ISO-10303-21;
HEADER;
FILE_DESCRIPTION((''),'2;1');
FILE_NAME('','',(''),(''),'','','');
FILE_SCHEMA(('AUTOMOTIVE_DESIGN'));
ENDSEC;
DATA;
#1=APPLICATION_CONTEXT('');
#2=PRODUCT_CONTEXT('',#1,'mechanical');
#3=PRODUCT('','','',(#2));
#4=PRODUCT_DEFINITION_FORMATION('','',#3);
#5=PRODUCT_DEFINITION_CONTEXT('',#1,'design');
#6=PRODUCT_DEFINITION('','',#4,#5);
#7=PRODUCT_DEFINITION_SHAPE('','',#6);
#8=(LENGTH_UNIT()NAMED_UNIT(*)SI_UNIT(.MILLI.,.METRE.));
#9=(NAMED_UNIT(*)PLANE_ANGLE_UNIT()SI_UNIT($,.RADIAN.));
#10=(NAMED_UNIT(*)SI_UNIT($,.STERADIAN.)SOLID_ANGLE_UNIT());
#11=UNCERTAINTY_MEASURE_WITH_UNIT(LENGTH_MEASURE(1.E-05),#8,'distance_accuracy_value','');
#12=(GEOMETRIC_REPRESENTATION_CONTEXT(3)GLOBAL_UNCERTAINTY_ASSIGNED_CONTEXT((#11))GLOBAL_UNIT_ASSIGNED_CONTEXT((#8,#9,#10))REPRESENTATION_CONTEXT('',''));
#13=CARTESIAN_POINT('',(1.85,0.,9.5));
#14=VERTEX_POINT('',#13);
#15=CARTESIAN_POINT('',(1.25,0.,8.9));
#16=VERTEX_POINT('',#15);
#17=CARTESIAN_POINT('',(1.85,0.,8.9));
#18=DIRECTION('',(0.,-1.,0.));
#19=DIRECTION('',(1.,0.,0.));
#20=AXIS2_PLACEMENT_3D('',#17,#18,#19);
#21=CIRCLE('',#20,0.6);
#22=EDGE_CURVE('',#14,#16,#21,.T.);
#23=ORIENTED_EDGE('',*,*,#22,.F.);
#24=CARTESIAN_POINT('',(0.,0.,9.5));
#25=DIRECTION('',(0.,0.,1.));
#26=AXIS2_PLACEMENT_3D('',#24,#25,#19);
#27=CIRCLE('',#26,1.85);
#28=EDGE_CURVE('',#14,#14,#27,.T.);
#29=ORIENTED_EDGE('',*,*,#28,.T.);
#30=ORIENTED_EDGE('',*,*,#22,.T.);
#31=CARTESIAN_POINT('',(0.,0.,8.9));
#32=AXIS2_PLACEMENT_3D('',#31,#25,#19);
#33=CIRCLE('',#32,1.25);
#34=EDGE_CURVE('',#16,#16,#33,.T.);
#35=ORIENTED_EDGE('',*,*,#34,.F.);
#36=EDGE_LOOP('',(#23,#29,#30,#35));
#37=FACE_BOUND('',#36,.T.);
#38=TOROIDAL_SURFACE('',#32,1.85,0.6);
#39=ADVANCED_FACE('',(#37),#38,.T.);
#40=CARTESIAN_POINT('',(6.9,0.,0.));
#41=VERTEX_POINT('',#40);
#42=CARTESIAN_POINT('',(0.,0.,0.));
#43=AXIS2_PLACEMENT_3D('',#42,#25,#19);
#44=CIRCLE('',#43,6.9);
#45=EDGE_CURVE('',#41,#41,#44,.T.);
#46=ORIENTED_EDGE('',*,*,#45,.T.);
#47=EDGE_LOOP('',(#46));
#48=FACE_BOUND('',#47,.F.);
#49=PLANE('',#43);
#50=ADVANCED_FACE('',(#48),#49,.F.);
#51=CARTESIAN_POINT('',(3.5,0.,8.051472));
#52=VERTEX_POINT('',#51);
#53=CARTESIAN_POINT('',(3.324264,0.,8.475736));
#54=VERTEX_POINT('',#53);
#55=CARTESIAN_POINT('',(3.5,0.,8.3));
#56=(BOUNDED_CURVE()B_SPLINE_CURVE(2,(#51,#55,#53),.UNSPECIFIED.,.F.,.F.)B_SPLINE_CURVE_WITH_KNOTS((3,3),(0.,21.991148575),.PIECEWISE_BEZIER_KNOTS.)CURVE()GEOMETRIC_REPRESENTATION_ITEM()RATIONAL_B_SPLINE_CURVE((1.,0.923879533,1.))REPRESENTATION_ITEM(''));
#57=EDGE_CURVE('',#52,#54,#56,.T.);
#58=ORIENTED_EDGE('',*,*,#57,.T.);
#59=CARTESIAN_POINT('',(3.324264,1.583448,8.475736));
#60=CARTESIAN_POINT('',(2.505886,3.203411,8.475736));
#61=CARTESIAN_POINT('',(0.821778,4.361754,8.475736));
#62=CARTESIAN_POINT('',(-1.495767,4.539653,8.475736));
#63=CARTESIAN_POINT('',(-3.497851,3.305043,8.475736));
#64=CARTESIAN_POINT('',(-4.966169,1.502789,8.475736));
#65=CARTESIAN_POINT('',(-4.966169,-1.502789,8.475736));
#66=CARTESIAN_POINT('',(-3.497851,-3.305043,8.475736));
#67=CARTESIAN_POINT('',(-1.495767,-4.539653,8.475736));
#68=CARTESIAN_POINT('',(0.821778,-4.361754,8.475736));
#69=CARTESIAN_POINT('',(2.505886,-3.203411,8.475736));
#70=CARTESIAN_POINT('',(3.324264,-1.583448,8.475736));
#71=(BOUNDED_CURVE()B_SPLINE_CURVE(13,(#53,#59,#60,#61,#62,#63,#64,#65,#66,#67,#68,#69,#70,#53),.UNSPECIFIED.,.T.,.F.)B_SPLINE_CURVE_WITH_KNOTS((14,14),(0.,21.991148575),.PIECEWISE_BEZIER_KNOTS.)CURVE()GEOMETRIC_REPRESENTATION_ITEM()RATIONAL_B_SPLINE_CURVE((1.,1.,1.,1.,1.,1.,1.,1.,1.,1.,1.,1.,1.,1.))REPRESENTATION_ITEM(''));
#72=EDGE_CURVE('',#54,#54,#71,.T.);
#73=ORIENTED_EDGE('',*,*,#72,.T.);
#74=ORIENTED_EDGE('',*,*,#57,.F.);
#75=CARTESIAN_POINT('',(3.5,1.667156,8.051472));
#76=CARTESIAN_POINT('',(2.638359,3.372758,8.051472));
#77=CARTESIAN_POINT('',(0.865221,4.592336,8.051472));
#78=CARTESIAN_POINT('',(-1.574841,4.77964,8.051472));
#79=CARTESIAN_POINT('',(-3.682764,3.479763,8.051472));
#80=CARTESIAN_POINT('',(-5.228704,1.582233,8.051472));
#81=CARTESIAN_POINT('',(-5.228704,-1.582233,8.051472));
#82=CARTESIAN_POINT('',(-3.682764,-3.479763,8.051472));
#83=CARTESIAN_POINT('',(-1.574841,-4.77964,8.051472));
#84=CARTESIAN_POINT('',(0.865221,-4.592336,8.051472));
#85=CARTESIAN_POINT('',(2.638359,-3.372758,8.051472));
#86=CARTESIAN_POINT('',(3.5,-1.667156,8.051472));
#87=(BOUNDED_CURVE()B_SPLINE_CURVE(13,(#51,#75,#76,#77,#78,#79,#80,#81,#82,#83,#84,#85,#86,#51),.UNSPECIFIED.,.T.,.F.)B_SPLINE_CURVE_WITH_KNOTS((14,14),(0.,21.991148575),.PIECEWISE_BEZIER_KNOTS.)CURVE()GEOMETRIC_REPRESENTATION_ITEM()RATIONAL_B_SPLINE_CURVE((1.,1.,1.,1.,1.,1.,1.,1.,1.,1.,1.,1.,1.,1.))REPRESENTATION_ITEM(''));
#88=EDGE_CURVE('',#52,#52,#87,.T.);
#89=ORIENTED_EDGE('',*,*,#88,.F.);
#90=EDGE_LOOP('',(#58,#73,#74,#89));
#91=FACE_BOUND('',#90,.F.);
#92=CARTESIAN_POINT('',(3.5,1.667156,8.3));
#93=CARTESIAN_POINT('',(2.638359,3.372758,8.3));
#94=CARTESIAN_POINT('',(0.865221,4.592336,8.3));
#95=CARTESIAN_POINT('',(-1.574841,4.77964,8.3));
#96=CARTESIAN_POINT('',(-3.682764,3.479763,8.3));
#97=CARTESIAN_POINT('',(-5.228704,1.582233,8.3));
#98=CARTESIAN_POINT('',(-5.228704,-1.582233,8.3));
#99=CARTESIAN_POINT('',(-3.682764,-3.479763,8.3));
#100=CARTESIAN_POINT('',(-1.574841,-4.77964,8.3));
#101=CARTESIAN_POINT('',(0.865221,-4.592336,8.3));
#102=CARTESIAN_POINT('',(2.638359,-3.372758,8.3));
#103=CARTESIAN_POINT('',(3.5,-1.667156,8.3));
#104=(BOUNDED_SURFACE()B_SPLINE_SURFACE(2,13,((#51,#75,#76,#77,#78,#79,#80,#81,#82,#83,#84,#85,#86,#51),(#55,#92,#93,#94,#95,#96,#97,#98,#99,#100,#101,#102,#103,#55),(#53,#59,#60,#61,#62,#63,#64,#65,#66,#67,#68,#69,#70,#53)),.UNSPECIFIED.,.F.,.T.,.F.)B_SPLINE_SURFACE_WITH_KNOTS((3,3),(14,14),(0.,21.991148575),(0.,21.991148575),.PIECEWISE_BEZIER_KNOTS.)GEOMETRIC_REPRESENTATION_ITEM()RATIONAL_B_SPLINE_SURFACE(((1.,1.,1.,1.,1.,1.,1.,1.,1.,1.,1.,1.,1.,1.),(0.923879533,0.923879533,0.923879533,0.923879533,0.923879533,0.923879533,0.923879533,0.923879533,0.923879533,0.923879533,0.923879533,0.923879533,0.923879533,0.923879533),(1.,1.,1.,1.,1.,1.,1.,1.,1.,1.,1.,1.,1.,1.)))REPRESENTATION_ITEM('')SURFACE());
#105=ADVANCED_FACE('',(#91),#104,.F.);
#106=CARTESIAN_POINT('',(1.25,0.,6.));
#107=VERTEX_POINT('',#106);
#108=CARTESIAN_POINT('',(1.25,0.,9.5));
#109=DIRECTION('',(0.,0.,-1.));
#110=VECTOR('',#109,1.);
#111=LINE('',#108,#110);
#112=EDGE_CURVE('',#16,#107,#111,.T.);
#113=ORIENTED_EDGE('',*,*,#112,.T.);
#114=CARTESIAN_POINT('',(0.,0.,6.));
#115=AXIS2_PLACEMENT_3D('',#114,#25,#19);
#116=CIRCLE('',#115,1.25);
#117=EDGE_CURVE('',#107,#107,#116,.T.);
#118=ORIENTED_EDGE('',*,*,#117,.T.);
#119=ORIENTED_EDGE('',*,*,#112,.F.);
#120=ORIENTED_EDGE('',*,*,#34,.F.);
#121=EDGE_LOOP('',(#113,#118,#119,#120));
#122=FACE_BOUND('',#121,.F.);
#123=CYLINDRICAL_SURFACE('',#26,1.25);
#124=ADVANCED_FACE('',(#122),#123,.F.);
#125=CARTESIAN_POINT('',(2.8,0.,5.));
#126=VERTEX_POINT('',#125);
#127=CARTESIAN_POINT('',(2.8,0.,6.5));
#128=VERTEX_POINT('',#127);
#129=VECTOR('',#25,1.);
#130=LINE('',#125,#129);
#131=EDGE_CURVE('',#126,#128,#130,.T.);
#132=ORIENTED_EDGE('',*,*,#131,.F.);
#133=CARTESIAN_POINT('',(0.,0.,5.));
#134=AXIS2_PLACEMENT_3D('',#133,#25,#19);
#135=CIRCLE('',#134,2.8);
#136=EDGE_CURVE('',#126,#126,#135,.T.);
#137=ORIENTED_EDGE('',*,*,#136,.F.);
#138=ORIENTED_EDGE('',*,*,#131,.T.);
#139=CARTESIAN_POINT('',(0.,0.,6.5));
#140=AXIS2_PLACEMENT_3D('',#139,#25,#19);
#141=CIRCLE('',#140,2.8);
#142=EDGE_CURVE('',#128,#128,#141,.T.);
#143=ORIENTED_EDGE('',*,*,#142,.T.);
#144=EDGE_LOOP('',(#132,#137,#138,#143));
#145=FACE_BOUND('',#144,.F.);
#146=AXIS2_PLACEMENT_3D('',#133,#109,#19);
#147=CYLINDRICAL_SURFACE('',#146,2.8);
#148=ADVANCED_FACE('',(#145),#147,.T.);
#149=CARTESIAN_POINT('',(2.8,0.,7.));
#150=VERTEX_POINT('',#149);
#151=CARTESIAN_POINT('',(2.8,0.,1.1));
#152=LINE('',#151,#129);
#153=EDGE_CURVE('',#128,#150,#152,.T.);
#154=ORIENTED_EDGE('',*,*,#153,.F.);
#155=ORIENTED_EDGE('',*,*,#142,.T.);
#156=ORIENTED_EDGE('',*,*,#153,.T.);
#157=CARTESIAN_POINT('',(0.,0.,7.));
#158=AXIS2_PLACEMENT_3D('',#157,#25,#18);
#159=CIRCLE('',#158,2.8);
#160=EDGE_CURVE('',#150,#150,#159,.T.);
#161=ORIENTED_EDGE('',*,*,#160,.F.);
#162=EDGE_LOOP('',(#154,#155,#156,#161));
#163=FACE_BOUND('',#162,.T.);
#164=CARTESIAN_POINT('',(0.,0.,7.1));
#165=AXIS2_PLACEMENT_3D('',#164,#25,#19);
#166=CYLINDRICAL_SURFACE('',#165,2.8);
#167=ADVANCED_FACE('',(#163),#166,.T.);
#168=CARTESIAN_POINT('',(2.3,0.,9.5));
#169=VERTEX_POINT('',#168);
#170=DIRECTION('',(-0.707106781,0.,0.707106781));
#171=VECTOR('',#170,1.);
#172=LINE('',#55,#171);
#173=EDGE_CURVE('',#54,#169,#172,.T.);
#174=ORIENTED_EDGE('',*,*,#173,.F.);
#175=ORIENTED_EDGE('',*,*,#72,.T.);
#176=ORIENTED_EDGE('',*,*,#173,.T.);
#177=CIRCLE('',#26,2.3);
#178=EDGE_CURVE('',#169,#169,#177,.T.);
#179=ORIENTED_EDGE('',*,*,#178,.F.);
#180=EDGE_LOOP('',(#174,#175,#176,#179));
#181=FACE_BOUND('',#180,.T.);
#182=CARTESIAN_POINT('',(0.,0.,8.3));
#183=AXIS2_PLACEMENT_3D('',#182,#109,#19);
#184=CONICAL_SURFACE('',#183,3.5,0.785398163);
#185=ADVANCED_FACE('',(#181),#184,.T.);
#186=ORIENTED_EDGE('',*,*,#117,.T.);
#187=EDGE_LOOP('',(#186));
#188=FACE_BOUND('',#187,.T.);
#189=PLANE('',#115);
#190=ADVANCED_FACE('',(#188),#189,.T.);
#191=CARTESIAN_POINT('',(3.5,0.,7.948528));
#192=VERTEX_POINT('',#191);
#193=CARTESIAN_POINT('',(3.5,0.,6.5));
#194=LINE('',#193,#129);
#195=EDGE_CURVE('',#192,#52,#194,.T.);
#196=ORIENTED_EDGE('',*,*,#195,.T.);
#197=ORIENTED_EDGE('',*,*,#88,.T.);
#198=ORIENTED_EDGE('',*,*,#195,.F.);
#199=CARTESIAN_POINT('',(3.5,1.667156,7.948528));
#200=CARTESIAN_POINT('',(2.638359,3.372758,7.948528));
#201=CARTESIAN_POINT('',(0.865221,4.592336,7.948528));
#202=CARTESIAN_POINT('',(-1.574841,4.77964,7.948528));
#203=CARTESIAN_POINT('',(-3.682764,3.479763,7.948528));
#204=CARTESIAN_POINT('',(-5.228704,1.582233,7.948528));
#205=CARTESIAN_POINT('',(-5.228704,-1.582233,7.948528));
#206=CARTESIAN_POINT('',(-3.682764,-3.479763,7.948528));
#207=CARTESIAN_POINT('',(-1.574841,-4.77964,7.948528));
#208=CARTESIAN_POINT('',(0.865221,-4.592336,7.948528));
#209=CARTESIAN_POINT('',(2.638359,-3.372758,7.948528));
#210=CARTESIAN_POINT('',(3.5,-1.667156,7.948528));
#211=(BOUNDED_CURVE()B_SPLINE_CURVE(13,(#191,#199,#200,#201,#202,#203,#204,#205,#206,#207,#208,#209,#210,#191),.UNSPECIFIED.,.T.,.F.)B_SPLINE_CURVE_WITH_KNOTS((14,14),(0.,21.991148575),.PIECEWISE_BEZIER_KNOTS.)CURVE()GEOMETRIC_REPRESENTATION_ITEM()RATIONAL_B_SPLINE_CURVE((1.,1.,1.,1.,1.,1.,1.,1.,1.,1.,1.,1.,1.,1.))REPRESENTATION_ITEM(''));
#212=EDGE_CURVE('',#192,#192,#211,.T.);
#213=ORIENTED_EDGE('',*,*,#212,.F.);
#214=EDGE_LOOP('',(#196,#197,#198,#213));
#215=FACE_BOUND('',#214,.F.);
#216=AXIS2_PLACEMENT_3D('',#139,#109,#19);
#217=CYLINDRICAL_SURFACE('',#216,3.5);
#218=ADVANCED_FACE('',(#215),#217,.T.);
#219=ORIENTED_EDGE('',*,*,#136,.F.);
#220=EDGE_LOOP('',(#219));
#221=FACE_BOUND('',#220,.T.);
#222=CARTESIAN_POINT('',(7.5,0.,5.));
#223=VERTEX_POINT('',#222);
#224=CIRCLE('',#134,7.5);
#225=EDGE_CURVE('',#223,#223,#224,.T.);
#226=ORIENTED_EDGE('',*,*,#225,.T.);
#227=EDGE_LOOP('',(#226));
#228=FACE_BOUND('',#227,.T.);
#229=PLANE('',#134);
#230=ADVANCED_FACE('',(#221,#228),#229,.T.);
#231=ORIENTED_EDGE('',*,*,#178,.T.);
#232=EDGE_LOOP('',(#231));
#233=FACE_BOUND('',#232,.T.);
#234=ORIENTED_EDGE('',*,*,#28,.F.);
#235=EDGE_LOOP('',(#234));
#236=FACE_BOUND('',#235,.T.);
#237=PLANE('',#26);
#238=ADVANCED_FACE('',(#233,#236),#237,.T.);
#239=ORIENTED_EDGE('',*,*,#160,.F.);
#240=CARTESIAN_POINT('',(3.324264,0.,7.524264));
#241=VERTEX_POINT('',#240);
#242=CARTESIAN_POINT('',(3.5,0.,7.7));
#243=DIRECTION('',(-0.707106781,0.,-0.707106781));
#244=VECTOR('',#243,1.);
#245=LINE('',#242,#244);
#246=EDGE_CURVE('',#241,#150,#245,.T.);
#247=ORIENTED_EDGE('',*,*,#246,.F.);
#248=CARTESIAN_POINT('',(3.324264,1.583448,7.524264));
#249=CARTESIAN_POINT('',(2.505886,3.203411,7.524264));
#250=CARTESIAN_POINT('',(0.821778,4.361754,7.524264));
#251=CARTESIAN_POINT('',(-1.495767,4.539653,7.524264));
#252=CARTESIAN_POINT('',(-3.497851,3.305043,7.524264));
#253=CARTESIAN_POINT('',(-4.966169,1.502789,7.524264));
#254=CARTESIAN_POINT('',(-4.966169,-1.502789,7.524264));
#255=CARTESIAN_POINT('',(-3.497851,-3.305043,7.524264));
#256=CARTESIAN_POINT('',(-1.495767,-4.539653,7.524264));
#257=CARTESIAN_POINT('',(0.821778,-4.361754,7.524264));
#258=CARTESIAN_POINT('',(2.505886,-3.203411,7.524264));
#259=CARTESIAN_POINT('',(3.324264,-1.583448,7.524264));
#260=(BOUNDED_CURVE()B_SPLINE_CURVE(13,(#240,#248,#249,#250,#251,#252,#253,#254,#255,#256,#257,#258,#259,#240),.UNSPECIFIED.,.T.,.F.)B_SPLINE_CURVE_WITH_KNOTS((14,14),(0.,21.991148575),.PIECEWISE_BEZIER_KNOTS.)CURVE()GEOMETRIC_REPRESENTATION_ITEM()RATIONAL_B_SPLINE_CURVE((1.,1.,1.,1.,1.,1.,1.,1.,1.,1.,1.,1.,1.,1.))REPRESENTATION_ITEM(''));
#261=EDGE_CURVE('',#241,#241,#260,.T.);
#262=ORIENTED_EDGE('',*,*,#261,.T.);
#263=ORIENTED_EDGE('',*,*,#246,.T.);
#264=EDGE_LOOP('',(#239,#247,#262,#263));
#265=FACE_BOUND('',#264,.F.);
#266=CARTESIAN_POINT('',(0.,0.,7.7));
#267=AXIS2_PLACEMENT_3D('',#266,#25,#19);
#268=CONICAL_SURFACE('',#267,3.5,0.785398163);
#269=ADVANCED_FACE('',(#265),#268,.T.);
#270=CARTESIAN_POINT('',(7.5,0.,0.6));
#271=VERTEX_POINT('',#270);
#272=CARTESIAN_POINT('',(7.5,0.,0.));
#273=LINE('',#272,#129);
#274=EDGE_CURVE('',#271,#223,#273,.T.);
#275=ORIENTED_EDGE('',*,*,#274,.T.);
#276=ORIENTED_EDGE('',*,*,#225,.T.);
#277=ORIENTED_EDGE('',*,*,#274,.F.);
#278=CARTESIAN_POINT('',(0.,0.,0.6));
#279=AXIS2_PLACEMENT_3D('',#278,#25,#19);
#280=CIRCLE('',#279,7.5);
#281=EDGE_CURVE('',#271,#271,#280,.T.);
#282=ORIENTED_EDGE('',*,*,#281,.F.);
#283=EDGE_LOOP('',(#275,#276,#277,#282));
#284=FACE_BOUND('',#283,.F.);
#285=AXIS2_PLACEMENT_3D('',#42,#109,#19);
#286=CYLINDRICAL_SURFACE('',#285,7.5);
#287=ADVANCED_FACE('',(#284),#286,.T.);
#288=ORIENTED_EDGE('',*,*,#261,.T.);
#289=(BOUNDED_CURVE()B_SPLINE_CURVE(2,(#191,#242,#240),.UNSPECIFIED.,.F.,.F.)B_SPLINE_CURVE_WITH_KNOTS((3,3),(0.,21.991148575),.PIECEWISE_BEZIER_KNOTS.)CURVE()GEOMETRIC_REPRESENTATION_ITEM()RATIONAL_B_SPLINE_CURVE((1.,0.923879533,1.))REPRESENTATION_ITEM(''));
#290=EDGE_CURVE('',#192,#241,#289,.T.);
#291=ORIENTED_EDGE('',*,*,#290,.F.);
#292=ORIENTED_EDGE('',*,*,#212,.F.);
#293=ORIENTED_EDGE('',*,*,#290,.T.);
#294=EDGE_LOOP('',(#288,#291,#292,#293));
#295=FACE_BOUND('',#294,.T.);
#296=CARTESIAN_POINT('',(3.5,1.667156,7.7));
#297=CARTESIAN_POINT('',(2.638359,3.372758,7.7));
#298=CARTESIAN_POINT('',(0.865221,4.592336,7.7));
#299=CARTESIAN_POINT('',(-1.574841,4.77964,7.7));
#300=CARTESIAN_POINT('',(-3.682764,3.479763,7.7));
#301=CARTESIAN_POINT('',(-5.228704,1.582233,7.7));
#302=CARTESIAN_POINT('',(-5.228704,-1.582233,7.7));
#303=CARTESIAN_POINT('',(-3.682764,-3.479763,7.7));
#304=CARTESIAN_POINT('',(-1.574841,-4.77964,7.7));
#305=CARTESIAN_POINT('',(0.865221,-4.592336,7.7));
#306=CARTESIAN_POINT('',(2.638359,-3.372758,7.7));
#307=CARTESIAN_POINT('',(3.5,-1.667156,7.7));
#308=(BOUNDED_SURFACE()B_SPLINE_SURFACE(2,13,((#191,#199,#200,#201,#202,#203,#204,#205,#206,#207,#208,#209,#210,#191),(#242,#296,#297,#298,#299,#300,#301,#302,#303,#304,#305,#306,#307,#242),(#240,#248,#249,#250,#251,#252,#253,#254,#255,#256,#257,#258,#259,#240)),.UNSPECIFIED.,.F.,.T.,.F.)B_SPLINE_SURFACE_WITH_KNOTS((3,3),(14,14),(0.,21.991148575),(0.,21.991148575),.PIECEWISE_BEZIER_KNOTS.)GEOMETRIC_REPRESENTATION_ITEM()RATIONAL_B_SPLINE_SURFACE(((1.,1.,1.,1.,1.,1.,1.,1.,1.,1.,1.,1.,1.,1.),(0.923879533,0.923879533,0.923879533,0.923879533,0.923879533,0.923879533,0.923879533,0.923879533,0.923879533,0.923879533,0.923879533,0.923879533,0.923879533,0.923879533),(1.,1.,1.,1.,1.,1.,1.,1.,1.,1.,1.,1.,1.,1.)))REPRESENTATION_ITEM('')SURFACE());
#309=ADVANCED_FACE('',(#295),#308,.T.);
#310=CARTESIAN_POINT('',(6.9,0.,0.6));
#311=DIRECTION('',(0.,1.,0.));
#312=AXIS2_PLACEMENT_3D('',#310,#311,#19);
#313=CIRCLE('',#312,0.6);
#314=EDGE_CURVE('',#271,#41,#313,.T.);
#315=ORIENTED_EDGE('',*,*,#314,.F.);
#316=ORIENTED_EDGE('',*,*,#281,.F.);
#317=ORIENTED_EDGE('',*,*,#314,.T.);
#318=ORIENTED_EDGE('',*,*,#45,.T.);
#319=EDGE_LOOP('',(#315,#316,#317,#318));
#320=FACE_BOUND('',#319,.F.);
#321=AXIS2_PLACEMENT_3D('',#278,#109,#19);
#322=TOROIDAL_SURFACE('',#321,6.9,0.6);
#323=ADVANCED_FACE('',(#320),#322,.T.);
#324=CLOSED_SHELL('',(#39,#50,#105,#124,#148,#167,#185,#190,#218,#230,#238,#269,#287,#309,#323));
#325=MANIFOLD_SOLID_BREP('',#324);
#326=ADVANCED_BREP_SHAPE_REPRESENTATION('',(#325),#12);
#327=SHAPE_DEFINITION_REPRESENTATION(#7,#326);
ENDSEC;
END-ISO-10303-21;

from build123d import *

# Parameters (mm, degrees)
F0_R        = 7.5
F1_DEPTH    = 5
F2_R        = 2.8
F3_DEPTH    = 1.5
F4_R        = 3.5
F5_DEPTH    = 3
F6_S5_R     = 2.8
F6_T6_DEPTH = 6
F7_R        = 1.25
F8_DEPTH    = 3.5
F9_R        = 0.6


# Not quite as in the source:
# - a fillet or chamfer that OpenCascade refuses, or shapes differently, is made with other operations: its cross-section is extruded or revolved along the edge and cut away or added
# - two fillets or chamfers of one size are made in one step


with BuildPart() as f1:
    # F0 (on Top) → F1 (new body)
    with BuildSketch(Plane.XY):
        Circle(F0_R)
    extrude(amount=F1_DEPTH)

    # F2 (on face) → F3 (join)
    with BuildSketch(Plane.XY.offset(5)):
        Circle(F2_R)
    extrude(amount=F3_DEPTH)

    # F4 (on face) → F5 (join)
    with BuildSketch(Plane.XY.offset(6.5)):
        Circle(F4_R)
    extrude(amount=F5_DEPTH)

    # F6: chamfer of 1.2 on 2 edges, made by hand


with BuildPart() as f6_tool2:
    # F6_s3 → F6_t4 (revolve)
    with BuildSketch(Plane.XZ):
        Polygon((3.5, 7.7), (2.3, 6.5), (3.5, 6.5), align=None)
    revolve(axis=Axis((0, 0, 6.5), (0, 0, 1)))

    # F6_s5 → F6_t6 (cut, symmetric)
    with BuildSketch(Plane.XY.offset(7.1)):
        Circle(F6_S5_R)
    extrude(amount=F6_T6_DEPTH, both=True, mode=Mode.SUBTRACT)


with BuildPart() as f1_1:
    add(f1.part)

    # F6_t1: cut F6_tool2
    add(f6_tool2.part, mode=Mode.SUBTRACT)

    # F6_s7 → F6_t8 (revolve, cut)
    with BuildSketch(Plane.XZ):
        Polygon((3.5, 8.3), (2.3, 9.5), (3.5, 9.5), align=None)
    revolve(axis=Axis((0, 0, 9.5), (0, 0, 1)), mode=Mode.SUBTRACT)

    # F7 (on face) → F8 (cut)
    with BuildSketch(Plane.XY.offset(9.5)):
        Circle(F7_R)
    extrude(amount=-F8_DEPTH, mode=Mode.SUBTRACT)

    # F9
    f9_edges = [f1_1.edges().sort_by_distance(p)[0] for p in [
        (-1.25, 0, 9.5),
        (-3.5, 0, 8.3),
        (-3.5, 0, 7.7),
        (-7.5, 0, 0),
    ]]
    fillet(f9_edges, radius=F9_R)


solid = f1_1.part
